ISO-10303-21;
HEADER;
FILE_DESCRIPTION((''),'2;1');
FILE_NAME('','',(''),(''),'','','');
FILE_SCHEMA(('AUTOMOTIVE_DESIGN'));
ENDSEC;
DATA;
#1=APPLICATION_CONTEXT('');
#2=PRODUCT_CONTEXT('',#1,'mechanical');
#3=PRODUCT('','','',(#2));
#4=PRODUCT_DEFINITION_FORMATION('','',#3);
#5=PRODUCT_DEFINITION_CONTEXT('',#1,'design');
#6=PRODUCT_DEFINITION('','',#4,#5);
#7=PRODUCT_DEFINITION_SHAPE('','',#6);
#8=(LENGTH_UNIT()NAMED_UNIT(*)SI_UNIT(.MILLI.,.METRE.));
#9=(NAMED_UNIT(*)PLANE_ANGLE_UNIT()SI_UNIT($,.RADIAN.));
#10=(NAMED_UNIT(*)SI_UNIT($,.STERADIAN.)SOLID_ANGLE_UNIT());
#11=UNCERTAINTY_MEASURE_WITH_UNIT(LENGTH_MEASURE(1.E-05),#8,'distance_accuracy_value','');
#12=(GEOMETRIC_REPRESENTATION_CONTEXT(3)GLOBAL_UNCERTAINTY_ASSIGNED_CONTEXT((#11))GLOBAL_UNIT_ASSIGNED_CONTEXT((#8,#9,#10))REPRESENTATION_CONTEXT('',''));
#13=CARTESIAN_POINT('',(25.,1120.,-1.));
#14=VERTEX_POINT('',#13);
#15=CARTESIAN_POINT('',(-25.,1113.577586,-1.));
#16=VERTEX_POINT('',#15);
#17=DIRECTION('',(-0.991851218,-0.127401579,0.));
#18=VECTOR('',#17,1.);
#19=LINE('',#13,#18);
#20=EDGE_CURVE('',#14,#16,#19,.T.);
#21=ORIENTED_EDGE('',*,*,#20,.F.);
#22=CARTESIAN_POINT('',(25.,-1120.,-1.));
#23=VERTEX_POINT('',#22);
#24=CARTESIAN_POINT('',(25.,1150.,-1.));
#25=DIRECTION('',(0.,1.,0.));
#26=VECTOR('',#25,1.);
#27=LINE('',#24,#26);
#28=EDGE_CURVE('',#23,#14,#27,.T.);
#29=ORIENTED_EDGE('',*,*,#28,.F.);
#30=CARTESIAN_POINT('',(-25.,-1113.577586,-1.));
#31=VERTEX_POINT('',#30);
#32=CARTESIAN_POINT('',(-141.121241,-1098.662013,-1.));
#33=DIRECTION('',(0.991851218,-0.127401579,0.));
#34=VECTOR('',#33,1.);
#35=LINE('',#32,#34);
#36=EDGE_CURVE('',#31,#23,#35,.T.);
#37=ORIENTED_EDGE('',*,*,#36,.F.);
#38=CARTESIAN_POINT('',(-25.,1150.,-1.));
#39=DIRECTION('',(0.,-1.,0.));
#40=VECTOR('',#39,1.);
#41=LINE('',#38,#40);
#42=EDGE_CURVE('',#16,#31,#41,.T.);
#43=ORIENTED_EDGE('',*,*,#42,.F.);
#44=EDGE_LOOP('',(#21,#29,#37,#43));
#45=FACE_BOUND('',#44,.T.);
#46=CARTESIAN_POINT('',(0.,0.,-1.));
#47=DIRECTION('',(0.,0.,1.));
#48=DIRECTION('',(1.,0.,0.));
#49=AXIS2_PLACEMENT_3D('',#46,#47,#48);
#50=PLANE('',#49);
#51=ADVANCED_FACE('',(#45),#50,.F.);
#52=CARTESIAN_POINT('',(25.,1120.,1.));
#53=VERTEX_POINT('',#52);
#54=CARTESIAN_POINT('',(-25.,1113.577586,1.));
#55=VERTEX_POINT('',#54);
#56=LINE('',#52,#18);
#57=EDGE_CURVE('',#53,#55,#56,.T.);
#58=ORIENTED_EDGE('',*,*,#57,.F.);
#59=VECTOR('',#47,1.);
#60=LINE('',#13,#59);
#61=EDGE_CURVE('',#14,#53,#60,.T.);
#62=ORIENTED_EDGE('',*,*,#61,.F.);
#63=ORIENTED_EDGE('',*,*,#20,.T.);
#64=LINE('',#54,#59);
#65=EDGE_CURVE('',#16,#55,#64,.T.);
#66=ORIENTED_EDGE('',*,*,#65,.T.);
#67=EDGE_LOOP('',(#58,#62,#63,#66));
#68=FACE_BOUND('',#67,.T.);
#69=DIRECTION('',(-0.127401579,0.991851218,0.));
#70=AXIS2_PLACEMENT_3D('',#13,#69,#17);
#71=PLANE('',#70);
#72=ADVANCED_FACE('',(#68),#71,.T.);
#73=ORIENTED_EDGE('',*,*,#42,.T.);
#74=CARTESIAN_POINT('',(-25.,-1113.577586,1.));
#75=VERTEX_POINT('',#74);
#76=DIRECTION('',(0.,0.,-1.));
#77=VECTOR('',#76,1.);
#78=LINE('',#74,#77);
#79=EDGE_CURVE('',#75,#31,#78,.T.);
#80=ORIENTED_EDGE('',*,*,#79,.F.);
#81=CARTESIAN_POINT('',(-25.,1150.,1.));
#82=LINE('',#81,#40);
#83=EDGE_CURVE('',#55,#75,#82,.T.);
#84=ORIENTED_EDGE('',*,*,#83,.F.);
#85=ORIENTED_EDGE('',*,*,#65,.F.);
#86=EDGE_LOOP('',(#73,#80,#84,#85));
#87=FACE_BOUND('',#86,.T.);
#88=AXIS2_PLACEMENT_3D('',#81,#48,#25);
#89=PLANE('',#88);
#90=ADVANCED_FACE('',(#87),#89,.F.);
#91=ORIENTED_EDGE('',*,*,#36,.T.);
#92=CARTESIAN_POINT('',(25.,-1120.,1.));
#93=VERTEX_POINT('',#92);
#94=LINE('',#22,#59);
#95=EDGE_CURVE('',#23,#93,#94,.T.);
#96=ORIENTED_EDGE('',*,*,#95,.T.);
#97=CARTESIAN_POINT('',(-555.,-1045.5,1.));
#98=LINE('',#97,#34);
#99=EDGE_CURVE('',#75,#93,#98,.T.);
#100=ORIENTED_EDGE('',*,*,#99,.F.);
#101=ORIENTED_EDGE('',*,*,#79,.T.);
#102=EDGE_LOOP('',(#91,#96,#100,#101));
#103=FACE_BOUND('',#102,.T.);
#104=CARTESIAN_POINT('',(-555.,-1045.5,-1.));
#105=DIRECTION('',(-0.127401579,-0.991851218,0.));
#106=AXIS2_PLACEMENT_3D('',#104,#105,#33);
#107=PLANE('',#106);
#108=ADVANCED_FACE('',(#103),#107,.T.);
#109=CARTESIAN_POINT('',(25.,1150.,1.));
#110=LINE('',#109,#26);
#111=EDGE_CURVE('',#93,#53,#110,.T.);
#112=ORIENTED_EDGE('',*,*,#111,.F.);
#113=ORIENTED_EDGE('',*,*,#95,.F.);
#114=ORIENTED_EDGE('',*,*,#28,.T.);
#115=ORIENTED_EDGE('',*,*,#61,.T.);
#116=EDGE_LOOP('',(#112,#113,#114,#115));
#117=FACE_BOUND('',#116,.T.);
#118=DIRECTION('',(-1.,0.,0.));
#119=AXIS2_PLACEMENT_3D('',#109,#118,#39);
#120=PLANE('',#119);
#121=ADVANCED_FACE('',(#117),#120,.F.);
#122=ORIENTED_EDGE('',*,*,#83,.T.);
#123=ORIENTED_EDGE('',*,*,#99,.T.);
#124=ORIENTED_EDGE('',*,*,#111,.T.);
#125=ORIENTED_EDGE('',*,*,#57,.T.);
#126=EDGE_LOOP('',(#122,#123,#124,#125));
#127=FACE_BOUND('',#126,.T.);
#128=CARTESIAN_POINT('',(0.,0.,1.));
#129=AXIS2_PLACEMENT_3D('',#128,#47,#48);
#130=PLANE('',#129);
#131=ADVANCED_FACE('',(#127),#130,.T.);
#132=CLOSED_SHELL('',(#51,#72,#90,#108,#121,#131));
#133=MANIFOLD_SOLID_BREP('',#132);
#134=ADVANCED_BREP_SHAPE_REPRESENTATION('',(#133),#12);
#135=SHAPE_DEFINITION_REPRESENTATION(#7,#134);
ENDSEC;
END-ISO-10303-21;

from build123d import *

# Parameters (mm, degrees)
SKETCH_1_W          = 50
SKETCH_1_H          = 2300
EXTRUDE_1_DEPTH     = 1
CUT_EXTRUDE_START   = -2
CUT_EXTRUDE_1_DEPTH = 2


# Read off the part's stored shape, not the designer's step: Вырез-Вытянуть1
with BuildPart() as part:
    # Эскиз1 → Бобышка-Вытянуть1 (new, symmetric)
    with BuildSketch(Plane.XY):
        Rectangle(SKETCH_1_W, SKETCH_1_H)
    extrude(amount=EXTRUDE_1_DEPTH, both=True)

    # Вырез-Вытянуть1 outline → Вырез-Вытянуть1 (cut)
    with BuildSketch(Plane.XY.offset(1).offset(CUT_EXTRUDE_START)):
        Polygon((25, -1120), (-25, -1113.577586207), (-25, -1150), (25, -1150), align=None)
        Polygon((-25, 1150), (-25, 1113.577586207), (25, 1120), (25, 1150), align=None)
    extrude(amount=CUT_EXTRUDE_1_DEPTH, mode=Mode.SUBTRACT)


solid = part.part
